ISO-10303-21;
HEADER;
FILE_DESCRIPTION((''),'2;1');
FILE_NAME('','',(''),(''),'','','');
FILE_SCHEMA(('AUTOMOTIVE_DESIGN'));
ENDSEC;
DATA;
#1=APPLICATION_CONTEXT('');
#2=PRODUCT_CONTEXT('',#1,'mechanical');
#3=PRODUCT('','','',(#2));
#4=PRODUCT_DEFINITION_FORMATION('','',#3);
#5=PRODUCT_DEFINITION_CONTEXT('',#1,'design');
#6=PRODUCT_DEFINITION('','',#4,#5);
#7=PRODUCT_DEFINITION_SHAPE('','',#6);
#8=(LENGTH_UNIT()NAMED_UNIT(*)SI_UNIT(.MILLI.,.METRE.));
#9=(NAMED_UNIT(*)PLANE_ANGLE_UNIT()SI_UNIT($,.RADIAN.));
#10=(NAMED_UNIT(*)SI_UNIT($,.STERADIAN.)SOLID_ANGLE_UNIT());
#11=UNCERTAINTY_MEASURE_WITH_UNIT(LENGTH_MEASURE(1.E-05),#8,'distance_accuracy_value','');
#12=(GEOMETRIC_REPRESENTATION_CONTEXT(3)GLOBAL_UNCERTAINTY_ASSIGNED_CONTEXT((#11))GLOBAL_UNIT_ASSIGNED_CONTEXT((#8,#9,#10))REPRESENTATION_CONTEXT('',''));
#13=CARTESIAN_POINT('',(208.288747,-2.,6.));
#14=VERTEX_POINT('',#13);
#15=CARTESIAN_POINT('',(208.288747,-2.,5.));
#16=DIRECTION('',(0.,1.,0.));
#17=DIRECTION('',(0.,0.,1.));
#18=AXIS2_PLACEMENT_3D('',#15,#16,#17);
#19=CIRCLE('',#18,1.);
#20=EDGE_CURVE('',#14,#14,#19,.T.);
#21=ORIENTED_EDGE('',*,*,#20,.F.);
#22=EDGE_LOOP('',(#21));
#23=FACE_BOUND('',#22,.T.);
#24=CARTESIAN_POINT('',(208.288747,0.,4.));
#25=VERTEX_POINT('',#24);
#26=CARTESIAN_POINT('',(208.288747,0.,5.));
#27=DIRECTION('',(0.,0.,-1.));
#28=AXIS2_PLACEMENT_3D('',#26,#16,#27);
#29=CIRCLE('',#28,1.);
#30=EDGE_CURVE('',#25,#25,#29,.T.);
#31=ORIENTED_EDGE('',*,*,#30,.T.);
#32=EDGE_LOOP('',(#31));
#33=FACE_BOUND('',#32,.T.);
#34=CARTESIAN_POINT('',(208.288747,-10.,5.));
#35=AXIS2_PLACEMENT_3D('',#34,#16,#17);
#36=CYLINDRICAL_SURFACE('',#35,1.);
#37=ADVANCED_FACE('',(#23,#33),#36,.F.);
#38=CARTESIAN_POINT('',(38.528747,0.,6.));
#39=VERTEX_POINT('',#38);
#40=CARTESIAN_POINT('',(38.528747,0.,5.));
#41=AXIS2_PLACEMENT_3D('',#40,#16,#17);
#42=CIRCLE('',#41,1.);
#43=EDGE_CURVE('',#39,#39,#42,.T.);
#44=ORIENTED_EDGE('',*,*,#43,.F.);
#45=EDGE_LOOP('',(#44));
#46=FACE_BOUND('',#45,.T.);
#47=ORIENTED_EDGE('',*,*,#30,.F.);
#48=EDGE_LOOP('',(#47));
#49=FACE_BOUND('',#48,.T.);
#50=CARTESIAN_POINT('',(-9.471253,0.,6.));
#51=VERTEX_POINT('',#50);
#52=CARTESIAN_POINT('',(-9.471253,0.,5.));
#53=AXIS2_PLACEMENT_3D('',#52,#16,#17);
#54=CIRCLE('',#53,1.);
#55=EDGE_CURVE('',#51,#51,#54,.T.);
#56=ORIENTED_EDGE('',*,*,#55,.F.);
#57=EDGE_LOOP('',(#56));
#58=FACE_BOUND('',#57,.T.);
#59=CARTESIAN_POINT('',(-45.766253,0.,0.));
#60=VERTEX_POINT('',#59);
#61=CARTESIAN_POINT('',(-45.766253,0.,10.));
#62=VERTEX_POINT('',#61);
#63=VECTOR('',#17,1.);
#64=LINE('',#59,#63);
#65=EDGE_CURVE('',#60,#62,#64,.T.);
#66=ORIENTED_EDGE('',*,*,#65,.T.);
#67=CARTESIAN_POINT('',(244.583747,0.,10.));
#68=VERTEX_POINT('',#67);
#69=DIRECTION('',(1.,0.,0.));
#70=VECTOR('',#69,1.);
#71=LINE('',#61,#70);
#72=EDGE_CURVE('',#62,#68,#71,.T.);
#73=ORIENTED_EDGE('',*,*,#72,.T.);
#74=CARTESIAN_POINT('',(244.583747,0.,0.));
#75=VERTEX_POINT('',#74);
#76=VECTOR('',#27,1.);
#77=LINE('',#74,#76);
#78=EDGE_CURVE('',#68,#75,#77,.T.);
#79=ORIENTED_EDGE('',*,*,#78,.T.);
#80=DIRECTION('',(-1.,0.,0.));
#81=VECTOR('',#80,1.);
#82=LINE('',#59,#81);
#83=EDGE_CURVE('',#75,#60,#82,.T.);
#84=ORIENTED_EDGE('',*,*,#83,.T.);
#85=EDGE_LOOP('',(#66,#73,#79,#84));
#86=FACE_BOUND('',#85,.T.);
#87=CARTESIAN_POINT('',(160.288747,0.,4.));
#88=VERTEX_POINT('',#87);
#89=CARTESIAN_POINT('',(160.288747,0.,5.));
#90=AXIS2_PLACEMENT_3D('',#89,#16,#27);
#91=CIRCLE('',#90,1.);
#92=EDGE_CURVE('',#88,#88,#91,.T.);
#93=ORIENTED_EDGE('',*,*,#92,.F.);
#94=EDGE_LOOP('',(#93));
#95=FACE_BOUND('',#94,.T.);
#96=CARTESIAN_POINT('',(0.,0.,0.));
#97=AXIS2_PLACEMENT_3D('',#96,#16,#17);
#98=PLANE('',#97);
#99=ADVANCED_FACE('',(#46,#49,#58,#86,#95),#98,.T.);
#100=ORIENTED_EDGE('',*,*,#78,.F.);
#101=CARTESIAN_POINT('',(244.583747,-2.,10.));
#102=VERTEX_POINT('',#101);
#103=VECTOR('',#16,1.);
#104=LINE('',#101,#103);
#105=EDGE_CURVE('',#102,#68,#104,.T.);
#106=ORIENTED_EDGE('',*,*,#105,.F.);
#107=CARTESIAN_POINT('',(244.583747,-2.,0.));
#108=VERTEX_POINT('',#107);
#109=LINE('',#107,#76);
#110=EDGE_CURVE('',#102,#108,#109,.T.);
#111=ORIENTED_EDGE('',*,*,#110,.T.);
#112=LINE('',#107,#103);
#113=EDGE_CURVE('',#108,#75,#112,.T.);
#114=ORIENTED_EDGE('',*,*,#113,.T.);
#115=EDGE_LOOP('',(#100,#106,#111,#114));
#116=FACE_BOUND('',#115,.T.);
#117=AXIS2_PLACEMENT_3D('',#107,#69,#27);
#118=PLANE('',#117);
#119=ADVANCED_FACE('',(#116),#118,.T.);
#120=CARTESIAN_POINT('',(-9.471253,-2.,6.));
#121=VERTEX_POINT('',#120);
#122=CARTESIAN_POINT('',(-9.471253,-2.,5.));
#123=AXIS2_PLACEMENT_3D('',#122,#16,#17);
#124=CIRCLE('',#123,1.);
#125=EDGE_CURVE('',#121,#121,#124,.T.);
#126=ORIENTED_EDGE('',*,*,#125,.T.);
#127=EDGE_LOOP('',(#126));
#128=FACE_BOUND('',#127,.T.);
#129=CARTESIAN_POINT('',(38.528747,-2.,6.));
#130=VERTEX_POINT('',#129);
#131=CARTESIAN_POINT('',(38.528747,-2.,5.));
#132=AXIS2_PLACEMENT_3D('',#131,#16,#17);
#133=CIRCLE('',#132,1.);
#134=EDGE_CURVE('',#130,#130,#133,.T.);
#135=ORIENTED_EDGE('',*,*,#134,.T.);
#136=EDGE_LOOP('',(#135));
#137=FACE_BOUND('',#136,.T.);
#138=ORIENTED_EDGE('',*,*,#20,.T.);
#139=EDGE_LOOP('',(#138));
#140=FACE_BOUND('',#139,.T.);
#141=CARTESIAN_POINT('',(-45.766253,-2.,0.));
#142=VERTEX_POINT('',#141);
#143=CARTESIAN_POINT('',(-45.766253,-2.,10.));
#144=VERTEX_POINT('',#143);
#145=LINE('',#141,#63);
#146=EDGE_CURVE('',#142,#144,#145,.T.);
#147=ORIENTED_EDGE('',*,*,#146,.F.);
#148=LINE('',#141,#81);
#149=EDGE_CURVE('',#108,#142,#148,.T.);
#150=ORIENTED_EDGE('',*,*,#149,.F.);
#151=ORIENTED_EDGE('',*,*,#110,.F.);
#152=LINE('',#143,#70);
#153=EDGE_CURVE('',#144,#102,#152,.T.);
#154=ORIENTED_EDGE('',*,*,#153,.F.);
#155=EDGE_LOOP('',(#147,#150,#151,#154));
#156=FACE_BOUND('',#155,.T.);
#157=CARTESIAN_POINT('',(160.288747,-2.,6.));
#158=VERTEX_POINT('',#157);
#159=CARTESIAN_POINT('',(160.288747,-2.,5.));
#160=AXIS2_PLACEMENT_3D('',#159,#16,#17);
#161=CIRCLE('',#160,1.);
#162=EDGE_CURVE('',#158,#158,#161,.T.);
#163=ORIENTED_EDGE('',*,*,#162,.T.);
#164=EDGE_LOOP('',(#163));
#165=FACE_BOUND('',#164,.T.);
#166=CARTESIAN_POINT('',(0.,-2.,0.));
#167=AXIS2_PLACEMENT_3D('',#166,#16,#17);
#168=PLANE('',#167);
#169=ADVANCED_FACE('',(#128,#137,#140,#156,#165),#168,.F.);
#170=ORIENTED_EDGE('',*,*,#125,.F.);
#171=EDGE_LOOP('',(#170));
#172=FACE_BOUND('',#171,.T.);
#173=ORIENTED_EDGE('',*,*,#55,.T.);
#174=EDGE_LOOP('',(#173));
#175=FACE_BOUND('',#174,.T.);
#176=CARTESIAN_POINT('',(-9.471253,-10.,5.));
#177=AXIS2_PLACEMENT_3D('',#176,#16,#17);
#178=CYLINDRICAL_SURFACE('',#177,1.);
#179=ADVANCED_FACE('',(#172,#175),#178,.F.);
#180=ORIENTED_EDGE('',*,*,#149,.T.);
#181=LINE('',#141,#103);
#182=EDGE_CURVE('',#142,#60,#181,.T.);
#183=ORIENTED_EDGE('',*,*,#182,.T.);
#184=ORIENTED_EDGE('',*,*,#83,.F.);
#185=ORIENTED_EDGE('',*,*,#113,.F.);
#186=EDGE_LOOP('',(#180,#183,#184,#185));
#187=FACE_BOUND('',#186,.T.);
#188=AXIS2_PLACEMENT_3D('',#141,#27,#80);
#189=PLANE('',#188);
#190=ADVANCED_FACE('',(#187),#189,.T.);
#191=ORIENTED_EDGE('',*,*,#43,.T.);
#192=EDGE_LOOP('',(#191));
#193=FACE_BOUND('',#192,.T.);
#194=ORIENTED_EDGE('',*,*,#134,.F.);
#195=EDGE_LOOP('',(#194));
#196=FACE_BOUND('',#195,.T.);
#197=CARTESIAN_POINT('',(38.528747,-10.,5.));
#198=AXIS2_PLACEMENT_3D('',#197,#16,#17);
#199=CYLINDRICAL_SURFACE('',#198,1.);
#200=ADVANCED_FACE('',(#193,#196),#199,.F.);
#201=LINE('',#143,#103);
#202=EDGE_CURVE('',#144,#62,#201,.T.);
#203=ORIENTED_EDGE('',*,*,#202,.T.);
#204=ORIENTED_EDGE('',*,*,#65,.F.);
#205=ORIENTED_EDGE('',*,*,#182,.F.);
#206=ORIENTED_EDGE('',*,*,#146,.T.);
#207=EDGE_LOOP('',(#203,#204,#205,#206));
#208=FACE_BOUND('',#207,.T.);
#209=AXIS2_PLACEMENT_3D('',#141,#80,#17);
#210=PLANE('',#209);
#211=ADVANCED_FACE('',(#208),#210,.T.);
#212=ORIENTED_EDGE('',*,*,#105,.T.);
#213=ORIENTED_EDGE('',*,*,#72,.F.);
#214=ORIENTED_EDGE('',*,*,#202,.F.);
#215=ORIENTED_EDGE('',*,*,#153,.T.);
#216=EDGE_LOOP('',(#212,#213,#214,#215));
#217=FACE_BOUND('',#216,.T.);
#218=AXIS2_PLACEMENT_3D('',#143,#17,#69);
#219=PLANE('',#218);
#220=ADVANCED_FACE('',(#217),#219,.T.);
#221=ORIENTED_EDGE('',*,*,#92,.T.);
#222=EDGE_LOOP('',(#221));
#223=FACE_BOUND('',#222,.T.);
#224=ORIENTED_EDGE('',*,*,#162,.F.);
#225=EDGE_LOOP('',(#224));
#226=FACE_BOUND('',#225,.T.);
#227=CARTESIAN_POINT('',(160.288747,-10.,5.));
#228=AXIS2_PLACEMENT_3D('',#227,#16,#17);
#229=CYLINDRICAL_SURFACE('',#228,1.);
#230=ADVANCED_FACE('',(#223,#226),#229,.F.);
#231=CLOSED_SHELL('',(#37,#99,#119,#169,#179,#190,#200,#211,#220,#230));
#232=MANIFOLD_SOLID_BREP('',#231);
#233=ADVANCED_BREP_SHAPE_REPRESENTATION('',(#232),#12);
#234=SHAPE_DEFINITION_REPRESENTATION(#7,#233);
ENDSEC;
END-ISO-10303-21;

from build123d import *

# Parameters (mm, degrees)
SKETCH1_W          = 290.35
SKETCH1_H          = 10
BASE_FLANGE1_DEPTH = 2
SKETCH2_R          = 1
CUT_EXTRUDE1_DEPTH = 10


# Sheet-metal steps are written as plain solids
with BuildPart() as part:
    # Sketch1 → Base-Flange1 (new body)
    with BuildSketch(Plane(origin=(0, 0, 0), x_dir=(1, 0, 0), z_dir=(0, 1, 0))):
        with Locations((99.408746863, -5)):
            Rectangle(SKETCH1_W, SKETCH1_H)
    extrude(amount=-BASE_FLANGE1_DEPTH)

    # Sketch2 → Cut-Extrude1 (cut)
    with BuildSketch(Plane(origin=(0, 0, 0), x_dir=(1, 0, 0), z_dir=(0, 1, 0))):
        with Locations(Location((-9.471253137, -5, 0), (0, 0, 270))):
            Circle(SKETCH2_R)
        with Locations(Location((38.528746863, -5, 0), (0, 0, 270))):
            Circle(SKETCH2_R)
        with Locations(Location((160.288746863, -5, 0), (0, 0, 270))):
            Circle(SKETCH2_R)
        with Locations(Location((208.288746863, -5, 0), (0, 0, 270))):
            Circle(SKETCH2_R)
    extrude(amount=-CUT_EXTRUDE1_DEPTH, mode=Mode.SUBTRACT)


solid = part.part
